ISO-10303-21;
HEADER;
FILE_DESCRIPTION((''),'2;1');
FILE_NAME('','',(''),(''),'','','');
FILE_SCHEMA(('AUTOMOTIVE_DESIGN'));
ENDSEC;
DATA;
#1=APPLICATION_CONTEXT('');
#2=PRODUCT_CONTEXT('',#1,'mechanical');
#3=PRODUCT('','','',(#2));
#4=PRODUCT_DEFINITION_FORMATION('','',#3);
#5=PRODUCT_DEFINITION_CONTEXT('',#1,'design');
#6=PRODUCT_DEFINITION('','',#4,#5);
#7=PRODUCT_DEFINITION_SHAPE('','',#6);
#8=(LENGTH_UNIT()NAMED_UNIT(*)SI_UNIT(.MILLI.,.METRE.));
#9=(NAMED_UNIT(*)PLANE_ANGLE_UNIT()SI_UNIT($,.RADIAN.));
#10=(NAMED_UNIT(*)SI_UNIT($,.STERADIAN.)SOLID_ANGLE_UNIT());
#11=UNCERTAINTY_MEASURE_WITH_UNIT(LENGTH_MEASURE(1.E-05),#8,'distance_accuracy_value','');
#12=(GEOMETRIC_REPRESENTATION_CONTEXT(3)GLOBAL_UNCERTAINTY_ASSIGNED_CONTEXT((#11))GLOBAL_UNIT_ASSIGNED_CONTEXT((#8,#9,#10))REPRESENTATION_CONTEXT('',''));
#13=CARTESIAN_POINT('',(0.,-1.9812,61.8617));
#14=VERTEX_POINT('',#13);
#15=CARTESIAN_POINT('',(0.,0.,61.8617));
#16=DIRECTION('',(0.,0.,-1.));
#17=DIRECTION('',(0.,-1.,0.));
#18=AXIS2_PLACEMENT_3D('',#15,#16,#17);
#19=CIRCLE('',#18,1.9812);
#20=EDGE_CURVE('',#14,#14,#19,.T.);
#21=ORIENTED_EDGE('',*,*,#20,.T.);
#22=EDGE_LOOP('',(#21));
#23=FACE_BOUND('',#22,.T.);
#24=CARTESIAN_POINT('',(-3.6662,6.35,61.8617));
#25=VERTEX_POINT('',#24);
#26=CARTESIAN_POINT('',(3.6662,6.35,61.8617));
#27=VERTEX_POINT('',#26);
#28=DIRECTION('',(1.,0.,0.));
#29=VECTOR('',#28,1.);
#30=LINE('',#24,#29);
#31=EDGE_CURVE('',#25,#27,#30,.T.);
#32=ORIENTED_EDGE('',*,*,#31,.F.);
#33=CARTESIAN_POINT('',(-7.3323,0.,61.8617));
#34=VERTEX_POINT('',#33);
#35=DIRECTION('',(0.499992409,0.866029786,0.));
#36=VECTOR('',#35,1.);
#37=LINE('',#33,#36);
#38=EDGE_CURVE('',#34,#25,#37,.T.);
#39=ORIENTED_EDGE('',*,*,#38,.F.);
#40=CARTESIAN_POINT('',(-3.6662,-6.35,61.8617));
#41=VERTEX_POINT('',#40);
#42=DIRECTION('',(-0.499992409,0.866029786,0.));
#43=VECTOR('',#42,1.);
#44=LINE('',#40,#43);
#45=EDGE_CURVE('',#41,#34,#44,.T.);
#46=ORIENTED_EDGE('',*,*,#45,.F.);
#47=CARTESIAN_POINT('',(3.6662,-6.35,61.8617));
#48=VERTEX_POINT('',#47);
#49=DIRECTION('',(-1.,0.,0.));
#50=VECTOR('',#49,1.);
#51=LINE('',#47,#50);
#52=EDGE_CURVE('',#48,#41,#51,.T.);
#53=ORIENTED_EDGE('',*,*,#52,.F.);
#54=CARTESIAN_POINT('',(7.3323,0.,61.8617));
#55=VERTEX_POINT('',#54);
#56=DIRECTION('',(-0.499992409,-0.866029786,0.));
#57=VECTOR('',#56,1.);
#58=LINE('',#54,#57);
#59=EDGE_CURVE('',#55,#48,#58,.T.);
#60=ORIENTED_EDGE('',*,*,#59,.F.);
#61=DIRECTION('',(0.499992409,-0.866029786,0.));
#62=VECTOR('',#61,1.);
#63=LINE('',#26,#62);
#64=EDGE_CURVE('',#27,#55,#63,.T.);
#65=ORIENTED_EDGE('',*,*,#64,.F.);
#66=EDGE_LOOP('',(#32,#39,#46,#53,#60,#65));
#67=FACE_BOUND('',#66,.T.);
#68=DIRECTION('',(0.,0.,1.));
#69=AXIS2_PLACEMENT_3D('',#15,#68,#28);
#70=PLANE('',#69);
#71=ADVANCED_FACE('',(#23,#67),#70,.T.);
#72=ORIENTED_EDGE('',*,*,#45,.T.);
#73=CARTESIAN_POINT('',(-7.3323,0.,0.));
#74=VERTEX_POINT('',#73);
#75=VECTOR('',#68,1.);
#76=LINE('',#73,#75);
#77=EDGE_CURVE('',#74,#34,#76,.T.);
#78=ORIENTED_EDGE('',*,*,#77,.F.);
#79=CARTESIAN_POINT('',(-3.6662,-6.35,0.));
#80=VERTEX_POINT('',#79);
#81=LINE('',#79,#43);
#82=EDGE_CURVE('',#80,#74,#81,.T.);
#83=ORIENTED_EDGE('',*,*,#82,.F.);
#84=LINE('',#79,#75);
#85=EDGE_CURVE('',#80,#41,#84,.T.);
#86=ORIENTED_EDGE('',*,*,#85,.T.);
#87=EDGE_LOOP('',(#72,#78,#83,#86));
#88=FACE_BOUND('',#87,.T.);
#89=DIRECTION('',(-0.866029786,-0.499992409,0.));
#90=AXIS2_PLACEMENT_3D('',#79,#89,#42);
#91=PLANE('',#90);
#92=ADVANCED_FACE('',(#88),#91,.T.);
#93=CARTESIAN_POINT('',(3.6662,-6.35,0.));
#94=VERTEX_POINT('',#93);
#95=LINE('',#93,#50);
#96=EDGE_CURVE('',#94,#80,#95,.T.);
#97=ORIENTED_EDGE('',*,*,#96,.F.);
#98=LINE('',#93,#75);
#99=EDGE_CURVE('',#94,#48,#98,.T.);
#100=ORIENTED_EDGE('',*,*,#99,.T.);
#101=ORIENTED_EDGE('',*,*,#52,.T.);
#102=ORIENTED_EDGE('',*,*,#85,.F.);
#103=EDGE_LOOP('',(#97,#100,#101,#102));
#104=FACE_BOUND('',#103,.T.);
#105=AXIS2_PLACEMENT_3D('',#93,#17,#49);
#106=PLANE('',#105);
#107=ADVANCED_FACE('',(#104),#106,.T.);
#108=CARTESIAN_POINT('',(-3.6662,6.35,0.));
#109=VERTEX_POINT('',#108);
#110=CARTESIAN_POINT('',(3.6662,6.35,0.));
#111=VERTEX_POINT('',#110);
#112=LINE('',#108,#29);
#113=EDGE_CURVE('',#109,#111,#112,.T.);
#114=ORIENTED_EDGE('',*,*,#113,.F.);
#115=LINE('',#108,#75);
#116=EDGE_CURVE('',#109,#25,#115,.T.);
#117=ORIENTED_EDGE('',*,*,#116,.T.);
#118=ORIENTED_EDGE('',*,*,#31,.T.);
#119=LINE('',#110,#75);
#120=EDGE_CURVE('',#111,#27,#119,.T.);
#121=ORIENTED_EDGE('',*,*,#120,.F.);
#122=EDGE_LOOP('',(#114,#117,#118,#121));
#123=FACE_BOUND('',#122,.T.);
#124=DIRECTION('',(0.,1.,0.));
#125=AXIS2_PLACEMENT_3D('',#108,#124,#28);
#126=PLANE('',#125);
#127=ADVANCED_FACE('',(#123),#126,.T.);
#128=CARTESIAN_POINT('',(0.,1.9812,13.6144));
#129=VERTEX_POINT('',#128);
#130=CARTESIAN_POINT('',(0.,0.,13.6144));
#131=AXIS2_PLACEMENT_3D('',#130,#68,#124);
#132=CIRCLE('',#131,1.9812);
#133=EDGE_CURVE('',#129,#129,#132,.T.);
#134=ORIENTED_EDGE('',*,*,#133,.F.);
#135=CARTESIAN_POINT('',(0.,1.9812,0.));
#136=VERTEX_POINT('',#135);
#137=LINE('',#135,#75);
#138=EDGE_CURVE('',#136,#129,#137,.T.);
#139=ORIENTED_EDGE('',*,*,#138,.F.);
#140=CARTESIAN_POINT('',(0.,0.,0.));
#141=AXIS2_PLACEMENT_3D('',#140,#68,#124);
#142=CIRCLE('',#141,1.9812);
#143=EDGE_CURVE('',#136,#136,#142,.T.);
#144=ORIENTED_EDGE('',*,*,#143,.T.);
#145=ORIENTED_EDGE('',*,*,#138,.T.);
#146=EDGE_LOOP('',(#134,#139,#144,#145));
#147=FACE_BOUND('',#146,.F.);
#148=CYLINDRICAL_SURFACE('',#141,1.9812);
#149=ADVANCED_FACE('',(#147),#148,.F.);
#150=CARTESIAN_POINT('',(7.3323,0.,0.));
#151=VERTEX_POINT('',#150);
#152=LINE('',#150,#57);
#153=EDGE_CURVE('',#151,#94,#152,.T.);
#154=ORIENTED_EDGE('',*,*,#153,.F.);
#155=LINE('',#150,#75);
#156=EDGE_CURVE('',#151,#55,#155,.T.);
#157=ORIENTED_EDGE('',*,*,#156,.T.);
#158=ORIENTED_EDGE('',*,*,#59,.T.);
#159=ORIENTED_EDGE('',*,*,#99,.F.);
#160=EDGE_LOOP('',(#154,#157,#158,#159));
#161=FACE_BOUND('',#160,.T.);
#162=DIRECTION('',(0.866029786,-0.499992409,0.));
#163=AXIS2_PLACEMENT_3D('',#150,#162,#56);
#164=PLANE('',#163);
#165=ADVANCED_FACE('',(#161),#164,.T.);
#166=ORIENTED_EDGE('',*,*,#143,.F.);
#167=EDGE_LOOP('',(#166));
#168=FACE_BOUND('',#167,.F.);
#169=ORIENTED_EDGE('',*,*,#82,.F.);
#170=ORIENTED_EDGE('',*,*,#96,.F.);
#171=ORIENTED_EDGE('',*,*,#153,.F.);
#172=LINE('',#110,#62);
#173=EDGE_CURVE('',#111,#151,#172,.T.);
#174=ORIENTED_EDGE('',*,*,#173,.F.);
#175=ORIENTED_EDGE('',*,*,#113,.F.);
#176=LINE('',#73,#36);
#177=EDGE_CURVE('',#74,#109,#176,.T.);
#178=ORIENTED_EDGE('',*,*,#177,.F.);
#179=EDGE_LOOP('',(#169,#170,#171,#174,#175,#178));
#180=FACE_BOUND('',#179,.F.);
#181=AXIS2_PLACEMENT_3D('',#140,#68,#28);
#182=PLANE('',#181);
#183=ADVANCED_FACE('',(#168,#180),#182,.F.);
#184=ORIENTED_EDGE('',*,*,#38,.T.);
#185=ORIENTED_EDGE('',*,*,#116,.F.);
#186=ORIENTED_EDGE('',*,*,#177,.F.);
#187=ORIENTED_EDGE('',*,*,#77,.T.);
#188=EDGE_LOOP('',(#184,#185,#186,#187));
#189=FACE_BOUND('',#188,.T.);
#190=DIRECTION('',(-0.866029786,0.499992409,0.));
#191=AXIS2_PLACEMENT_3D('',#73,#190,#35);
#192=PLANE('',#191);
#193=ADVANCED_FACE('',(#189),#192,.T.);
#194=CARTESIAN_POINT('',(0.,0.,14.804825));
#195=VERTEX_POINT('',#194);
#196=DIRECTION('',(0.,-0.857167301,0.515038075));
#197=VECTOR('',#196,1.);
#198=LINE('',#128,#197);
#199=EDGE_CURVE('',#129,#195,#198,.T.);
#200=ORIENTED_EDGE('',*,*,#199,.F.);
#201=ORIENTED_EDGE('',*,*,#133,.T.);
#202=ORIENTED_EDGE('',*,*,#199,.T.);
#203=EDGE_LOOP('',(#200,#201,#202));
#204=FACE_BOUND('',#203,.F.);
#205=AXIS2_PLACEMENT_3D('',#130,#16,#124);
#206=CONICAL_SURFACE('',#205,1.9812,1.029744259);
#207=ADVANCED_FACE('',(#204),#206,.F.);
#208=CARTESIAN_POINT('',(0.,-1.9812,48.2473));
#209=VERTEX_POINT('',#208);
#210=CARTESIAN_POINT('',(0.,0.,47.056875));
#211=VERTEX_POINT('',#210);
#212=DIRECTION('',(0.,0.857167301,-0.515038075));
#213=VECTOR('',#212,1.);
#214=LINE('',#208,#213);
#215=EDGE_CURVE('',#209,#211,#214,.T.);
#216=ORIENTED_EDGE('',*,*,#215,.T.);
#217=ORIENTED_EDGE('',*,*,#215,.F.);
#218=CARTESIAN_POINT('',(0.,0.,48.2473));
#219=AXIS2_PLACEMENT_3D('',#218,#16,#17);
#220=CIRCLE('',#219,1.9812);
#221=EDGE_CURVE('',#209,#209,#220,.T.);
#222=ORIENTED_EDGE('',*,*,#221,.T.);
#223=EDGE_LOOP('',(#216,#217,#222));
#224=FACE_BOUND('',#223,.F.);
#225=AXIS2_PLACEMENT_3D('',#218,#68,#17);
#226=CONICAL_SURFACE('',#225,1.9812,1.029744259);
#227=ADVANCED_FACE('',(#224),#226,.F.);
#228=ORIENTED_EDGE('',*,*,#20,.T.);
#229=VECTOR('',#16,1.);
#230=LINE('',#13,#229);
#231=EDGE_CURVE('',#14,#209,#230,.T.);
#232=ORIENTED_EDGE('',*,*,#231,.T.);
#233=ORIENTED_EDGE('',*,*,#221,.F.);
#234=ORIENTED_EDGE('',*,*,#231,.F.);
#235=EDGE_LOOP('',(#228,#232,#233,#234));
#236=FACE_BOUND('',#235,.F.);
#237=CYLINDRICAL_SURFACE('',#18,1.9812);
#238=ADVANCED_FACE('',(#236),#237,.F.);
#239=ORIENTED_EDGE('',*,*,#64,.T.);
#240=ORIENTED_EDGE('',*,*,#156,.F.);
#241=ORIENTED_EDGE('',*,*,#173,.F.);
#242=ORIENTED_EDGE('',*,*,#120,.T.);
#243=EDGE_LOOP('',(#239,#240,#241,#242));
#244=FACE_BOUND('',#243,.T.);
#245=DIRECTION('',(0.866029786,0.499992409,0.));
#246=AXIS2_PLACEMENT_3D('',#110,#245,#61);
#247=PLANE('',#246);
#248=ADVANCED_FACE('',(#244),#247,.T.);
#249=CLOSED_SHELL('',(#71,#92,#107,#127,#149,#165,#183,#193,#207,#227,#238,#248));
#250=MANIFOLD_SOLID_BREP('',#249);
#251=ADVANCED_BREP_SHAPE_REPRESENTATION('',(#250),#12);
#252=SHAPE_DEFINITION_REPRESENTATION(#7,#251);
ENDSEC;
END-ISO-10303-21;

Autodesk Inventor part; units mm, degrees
ref_plane "YZ Plane" through (0, 0, 0) normal (1, 0, 0) x (0, 1, 0)
ref_plane "XZ Plane" through (0, 0, 0) normal (0, 1, 0) x (-1, 0, 0)
ref_plane "XY Plane" through (0, 0, 0) normal (0, 0, 1) x (1, 0, 0)
sketch "Sketch1" plane through (0, 0, 0) normal (0, 0, 1) x (1, 0, 0)
  line L0 (3.6662, -6.35) -> (-3.6662, -6.35)
  line L1 (-3.6662, -6.35) -> (-7.3323, 0)
  line L2 (-7.3323, 0) -> (-3.6662, 6.35)
  line L3 (-3.6662, 6.35) -> (3.6662, 6.35)
  line L4 (3.6662, 6.35) -> (7.3323, 0)
  line L5 (7.3323, 0) -> (3.6662, -6.35)
  point P0 (0, 0)
  point P1 (0, 0)
  dimension "d0" = 12.7
extrude "Extrusion1" add sketch "Sketch1" along normal blind 61.8617
sketch "Sketch2" plane through (0, 0, 61.8617) normal (0, 0, 1) x (1, 0, 0)
  point P0 (0, 0)
  point P1 (0, 0)
hole "Hole1" at (0, 0, 61.8617) direction (0, 0, -1) diameter 3.9624 depth 13.6144 tip angle 118 thread size "10-32 UNF" class "2B" standard "ANSI Unified Screw Threads"
sketch "Sketch3" plane through (0, 0, 0) normal (0, 0, -1) x (-1, 0, 0)
  circle A0 centre (0, 0) radius 1.9812 projected
hole "Hole2" at (0, 0, 0) direction (0, 0, 1) diameter 3.9624 depth 13.6144 tip angle 118 thread size "10-32 UNF" class "2B" standard "ANSI Unified Screw Threads"
properties part number "STOCK,HEX,SHAFT,TURRET,ENCODER" material "Aluminum 6061"
